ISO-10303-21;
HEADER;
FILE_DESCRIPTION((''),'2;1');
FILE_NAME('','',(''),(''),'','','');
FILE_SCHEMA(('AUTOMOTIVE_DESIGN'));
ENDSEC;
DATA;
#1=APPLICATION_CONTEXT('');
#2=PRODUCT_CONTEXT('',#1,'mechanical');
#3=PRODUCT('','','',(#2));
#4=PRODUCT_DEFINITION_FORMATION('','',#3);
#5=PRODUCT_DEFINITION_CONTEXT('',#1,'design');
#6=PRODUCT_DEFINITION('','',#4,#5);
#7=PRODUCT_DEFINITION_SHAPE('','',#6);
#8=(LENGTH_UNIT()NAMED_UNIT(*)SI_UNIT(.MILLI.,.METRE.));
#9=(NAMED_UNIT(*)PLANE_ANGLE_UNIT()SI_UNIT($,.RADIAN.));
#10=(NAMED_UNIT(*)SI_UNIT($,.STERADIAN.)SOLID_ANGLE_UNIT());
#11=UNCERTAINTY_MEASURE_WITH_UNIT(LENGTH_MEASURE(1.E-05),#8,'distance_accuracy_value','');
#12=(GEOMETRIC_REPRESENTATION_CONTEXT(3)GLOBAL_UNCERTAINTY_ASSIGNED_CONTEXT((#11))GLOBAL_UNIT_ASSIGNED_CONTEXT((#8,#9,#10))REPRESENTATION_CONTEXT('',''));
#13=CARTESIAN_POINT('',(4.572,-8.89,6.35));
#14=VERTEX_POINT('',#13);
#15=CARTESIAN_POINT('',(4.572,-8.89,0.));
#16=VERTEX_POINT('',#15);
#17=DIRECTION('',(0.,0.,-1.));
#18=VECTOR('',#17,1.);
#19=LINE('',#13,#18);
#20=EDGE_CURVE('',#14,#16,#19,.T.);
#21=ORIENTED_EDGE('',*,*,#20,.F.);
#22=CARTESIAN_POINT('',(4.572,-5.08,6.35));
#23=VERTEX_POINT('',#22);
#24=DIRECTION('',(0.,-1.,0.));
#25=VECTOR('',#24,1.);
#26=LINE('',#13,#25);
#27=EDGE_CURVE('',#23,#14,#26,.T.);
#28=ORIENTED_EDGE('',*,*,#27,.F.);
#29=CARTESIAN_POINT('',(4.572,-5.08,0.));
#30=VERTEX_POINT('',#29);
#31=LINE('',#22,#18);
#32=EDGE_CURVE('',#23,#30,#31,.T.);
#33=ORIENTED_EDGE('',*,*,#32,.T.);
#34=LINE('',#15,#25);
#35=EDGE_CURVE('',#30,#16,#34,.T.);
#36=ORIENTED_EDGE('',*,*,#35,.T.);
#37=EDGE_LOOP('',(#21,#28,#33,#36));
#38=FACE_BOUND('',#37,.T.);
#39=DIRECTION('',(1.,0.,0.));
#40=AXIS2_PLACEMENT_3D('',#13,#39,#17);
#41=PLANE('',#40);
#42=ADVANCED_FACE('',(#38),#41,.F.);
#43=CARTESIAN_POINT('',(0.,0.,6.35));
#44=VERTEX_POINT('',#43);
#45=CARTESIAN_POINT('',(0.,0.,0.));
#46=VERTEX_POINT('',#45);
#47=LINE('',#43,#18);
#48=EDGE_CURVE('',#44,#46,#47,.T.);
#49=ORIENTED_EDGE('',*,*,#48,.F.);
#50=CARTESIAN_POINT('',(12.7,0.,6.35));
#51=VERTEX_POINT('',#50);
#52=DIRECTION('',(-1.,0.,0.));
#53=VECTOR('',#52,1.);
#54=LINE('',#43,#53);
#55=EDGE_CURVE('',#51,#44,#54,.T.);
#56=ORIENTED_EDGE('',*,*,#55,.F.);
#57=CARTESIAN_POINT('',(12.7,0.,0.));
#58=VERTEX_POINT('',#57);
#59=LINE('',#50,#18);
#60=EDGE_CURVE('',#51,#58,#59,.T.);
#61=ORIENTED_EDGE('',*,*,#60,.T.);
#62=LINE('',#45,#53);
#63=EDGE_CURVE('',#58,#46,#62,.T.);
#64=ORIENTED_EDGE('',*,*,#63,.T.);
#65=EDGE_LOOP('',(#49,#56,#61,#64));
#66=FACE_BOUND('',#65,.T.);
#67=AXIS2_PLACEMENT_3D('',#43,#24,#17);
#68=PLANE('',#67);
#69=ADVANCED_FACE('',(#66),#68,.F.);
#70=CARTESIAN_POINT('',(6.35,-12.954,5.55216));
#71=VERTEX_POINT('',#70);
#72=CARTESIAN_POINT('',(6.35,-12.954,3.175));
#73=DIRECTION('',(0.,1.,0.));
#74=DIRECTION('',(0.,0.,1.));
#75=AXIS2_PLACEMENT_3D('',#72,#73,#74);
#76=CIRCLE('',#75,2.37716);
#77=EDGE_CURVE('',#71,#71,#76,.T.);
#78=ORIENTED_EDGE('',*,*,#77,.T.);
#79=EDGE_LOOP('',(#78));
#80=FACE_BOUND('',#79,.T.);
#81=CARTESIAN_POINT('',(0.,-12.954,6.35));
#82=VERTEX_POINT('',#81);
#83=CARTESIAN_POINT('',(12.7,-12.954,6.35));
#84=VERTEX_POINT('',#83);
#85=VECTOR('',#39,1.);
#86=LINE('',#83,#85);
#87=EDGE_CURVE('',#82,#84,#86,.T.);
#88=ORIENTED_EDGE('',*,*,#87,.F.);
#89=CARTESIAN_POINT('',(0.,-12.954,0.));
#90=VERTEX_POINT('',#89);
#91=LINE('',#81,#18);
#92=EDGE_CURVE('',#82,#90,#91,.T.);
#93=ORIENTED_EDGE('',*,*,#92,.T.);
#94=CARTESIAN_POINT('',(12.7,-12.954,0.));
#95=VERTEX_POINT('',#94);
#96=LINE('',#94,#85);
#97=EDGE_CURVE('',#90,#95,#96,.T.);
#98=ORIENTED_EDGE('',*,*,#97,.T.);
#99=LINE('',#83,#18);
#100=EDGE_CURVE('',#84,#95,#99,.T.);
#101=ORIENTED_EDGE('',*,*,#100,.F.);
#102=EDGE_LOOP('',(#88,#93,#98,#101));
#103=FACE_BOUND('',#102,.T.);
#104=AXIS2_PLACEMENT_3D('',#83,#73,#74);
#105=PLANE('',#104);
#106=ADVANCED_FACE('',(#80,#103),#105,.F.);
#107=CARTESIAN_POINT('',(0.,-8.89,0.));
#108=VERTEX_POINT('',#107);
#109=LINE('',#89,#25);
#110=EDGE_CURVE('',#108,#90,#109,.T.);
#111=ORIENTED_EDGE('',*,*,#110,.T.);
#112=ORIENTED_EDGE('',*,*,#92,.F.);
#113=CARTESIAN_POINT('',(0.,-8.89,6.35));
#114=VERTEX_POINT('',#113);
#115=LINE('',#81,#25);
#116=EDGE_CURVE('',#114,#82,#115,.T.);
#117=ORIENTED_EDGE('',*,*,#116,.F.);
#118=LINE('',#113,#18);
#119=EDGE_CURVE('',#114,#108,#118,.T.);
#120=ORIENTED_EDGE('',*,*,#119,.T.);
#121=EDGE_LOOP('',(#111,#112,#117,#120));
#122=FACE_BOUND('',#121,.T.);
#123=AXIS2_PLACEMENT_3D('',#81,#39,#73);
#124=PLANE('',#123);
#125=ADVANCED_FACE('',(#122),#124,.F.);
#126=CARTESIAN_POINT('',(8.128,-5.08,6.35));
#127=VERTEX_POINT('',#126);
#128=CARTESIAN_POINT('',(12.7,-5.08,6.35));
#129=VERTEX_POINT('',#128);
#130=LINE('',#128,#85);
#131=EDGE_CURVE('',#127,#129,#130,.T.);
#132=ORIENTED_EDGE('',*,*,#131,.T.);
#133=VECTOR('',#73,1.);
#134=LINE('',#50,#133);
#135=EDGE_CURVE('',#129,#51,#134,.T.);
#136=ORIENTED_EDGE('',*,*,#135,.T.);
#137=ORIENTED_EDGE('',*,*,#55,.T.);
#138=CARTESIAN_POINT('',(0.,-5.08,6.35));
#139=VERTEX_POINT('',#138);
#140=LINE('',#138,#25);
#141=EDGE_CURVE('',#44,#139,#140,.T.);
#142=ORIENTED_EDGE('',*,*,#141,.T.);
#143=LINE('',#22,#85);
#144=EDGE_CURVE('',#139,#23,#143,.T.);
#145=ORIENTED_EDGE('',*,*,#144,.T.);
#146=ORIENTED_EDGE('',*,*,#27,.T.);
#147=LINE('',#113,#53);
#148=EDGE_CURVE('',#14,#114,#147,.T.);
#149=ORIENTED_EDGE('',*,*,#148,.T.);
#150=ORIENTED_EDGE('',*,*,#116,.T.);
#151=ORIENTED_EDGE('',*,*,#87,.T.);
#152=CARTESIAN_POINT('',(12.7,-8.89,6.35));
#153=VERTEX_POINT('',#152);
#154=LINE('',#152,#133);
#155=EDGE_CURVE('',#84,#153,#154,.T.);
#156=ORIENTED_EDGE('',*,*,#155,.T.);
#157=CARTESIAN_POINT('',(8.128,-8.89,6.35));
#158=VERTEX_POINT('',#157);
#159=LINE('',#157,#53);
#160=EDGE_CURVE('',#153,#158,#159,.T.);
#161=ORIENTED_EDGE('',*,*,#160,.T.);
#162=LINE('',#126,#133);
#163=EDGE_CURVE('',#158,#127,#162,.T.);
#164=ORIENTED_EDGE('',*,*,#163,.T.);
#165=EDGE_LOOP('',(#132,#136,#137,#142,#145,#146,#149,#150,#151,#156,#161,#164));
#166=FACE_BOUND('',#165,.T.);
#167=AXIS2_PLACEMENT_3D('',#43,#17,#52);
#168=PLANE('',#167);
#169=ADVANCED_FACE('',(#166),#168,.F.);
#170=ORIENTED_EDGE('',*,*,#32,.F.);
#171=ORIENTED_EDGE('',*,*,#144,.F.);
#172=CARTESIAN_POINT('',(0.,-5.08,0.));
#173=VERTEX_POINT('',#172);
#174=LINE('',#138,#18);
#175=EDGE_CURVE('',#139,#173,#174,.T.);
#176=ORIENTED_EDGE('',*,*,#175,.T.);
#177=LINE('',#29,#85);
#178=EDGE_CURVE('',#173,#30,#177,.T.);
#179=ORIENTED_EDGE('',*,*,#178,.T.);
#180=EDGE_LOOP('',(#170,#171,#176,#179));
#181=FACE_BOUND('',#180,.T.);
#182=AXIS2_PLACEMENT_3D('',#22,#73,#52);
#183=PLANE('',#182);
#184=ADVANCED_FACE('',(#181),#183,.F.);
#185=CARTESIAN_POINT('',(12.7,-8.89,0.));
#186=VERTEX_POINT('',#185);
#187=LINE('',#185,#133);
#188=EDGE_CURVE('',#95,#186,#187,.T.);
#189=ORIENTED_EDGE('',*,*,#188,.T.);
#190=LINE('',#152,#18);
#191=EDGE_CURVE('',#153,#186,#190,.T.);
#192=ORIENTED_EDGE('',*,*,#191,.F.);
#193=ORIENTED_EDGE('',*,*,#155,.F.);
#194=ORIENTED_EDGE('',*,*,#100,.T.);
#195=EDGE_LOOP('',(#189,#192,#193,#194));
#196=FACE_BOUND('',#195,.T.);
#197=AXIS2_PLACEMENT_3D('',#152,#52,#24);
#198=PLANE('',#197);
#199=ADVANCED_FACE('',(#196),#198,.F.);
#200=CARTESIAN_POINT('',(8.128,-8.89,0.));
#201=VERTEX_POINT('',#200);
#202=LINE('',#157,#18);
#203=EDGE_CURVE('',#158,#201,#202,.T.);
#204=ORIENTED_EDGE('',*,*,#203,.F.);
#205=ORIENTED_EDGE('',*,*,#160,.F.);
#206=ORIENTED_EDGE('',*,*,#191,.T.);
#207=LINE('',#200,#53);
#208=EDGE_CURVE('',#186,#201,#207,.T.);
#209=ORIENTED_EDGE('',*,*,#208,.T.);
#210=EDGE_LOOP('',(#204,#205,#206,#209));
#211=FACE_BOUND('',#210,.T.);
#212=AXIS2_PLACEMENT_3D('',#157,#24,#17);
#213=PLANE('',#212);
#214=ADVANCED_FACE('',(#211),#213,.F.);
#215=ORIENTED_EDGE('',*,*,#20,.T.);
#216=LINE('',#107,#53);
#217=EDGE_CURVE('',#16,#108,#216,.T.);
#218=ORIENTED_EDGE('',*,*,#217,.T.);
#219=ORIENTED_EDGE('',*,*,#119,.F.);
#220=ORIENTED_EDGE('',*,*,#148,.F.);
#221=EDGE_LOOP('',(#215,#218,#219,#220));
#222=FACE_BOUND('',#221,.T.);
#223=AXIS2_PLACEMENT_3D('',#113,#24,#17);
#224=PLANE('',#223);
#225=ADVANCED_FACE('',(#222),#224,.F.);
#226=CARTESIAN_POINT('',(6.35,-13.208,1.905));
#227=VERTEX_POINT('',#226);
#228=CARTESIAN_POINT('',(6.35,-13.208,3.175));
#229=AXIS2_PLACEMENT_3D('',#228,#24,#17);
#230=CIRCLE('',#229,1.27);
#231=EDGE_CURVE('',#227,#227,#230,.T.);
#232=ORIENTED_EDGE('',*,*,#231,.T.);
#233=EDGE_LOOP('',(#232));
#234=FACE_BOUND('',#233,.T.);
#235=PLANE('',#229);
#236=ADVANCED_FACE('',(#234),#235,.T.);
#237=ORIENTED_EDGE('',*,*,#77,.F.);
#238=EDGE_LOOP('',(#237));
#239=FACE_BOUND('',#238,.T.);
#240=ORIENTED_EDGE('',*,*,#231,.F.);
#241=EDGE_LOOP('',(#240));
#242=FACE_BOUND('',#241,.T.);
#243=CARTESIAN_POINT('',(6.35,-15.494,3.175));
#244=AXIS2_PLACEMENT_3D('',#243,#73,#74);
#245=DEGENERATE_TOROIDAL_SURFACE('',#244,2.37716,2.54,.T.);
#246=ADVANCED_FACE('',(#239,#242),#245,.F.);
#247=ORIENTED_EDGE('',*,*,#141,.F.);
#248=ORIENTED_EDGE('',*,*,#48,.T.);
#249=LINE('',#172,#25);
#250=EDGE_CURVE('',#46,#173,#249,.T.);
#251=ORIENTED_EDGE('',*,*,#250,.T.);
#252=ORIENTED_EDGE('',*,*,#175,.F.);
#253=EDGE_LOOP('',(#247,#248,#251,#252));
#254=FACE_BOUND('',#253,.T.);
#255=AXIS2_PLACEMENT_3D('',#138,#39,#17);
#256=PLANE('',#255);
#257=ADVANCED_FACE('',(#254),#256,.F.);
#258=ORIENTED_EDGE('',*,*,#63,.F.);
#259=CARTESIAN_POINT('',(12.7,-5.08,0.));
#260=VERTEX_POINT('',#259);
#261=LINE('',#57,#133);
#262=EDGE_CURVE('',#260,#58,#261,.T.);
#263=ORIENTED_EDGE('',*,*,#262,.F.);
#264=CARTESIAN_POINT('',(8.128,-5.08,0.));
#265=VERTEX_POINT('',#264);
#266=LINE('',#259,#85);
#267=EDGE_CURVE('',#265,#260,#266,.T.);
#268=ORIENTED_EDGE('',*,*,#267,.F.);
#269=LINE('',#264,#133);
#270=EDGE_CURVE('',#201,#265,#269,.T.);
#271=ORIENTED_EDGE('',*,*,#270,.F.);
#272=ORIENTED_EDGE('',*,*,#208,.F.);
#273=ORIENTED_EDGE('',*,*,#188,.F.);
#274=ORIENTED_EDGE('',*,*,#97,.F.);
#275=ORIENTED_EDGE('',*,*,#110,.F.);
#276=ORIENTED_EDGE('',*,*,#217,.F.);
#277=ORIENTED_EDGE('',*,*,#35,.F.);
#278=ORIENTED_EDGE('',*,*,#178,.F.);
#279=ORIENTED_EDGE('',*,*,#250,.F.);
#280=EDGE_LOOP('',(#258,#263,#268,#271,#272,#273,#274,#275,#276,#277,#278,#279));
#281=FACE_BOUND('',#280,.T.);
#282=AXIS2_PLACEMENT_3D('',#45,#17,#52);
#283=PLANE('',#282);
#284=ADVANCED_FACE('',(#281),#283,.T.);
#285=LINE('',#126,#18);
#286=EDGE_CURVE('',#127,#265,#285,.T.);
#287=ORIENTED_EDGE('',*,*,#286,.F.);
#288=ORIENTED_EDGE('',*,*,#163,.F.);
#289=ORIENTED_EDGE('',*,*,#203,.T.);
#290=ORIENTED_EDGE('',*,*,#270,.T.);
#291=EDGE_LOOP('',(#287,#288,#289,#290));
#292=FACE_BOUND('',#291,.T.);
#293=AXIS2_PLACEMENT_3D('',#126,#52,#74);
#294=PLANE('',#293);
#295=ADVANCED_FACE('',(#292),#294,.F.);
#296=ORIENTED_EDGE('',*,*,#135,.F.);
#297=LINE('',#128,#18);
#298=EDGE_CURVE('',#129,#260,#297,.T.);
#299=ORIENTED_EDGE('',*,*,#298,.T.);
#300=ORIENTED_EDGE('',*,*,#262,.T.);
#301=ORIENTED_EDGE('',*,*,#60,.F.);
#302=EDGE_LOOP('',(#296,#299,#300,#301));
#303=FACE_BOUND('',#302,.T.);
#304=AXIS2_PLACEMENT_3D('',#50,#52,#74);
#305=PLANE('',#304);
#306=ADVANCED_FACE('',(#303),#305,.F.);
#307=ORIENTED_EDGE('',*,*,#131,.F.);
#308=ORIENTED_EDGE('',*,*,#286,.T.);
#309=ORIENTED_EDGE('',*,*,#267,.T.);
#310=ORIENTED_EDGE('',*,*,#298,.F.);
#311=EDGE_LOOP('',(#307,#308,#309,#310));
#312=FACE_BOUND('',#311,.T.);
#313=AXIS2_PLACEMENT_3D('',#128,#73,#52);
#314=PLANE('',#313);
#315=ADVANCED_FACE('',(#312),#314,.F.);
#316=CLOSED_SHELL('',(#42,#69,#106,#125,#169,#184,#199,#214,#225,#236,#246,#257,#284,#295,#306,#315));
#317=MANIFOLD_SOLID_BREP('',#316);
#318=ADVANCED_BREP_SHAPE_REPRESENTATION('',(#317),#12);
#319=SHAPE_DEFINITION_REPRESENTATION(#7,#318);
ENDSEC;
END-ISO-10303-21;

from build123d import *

# Parameters (mm, degrees)
BODY_DEPTH = 6.35
SKETCH4_R  = 1.27
FLAG_DEPTH = 0.254
HOLDER_R   = 2.54


with BuildPart() as part:
    # Sketch2 → body (new body)
    with BuildSketch(Plane.XY):
        Polygon((0, 0), (12.7, 0), (12.7, -5.08), (8.128, -5.08), (8.128, -8.89), (12.7, -8.89), (12.7, -12.954), (0, -12.954), (0, -8.89), (4.572, -8.89), (4.572, -5.08), (0, -5.08), align=None)
    extrude(amount=BODY_DEPTH)

    # Sketch4 → flag (add)
    with BuildSketch(Plane.XZ.offset(12.954)):
        with Locations(Location((6.35, 3.175, 0), (0, 0, 90))):
            Circle(SKETCH4_R)
    extrude(amount=FLAG_DEPTH)

    # holder
    # the kernel refuses this fillet: 2.54 mm, written as the material it adds along each edge
    with BuildSketch(Plane(origin=(6.35, -12.954, 3.175), x_dir=(0, 0, 1), z_dir=(1, 0, 0))) as holder_piece_1:
        with BuildLine():
            CenterArc((2.377160332, 2.54), HOLDER_R, 244.158067237, 25.841932763)
            Line((1.27, 0.254), (1.27, 0))
            Line((1.27, 0), (2.377160332, 0))
        make_face()
    revolve(axis=Axis((6.35, -12.954, 3.175), (0, -1, 0)))


solid = part.part
